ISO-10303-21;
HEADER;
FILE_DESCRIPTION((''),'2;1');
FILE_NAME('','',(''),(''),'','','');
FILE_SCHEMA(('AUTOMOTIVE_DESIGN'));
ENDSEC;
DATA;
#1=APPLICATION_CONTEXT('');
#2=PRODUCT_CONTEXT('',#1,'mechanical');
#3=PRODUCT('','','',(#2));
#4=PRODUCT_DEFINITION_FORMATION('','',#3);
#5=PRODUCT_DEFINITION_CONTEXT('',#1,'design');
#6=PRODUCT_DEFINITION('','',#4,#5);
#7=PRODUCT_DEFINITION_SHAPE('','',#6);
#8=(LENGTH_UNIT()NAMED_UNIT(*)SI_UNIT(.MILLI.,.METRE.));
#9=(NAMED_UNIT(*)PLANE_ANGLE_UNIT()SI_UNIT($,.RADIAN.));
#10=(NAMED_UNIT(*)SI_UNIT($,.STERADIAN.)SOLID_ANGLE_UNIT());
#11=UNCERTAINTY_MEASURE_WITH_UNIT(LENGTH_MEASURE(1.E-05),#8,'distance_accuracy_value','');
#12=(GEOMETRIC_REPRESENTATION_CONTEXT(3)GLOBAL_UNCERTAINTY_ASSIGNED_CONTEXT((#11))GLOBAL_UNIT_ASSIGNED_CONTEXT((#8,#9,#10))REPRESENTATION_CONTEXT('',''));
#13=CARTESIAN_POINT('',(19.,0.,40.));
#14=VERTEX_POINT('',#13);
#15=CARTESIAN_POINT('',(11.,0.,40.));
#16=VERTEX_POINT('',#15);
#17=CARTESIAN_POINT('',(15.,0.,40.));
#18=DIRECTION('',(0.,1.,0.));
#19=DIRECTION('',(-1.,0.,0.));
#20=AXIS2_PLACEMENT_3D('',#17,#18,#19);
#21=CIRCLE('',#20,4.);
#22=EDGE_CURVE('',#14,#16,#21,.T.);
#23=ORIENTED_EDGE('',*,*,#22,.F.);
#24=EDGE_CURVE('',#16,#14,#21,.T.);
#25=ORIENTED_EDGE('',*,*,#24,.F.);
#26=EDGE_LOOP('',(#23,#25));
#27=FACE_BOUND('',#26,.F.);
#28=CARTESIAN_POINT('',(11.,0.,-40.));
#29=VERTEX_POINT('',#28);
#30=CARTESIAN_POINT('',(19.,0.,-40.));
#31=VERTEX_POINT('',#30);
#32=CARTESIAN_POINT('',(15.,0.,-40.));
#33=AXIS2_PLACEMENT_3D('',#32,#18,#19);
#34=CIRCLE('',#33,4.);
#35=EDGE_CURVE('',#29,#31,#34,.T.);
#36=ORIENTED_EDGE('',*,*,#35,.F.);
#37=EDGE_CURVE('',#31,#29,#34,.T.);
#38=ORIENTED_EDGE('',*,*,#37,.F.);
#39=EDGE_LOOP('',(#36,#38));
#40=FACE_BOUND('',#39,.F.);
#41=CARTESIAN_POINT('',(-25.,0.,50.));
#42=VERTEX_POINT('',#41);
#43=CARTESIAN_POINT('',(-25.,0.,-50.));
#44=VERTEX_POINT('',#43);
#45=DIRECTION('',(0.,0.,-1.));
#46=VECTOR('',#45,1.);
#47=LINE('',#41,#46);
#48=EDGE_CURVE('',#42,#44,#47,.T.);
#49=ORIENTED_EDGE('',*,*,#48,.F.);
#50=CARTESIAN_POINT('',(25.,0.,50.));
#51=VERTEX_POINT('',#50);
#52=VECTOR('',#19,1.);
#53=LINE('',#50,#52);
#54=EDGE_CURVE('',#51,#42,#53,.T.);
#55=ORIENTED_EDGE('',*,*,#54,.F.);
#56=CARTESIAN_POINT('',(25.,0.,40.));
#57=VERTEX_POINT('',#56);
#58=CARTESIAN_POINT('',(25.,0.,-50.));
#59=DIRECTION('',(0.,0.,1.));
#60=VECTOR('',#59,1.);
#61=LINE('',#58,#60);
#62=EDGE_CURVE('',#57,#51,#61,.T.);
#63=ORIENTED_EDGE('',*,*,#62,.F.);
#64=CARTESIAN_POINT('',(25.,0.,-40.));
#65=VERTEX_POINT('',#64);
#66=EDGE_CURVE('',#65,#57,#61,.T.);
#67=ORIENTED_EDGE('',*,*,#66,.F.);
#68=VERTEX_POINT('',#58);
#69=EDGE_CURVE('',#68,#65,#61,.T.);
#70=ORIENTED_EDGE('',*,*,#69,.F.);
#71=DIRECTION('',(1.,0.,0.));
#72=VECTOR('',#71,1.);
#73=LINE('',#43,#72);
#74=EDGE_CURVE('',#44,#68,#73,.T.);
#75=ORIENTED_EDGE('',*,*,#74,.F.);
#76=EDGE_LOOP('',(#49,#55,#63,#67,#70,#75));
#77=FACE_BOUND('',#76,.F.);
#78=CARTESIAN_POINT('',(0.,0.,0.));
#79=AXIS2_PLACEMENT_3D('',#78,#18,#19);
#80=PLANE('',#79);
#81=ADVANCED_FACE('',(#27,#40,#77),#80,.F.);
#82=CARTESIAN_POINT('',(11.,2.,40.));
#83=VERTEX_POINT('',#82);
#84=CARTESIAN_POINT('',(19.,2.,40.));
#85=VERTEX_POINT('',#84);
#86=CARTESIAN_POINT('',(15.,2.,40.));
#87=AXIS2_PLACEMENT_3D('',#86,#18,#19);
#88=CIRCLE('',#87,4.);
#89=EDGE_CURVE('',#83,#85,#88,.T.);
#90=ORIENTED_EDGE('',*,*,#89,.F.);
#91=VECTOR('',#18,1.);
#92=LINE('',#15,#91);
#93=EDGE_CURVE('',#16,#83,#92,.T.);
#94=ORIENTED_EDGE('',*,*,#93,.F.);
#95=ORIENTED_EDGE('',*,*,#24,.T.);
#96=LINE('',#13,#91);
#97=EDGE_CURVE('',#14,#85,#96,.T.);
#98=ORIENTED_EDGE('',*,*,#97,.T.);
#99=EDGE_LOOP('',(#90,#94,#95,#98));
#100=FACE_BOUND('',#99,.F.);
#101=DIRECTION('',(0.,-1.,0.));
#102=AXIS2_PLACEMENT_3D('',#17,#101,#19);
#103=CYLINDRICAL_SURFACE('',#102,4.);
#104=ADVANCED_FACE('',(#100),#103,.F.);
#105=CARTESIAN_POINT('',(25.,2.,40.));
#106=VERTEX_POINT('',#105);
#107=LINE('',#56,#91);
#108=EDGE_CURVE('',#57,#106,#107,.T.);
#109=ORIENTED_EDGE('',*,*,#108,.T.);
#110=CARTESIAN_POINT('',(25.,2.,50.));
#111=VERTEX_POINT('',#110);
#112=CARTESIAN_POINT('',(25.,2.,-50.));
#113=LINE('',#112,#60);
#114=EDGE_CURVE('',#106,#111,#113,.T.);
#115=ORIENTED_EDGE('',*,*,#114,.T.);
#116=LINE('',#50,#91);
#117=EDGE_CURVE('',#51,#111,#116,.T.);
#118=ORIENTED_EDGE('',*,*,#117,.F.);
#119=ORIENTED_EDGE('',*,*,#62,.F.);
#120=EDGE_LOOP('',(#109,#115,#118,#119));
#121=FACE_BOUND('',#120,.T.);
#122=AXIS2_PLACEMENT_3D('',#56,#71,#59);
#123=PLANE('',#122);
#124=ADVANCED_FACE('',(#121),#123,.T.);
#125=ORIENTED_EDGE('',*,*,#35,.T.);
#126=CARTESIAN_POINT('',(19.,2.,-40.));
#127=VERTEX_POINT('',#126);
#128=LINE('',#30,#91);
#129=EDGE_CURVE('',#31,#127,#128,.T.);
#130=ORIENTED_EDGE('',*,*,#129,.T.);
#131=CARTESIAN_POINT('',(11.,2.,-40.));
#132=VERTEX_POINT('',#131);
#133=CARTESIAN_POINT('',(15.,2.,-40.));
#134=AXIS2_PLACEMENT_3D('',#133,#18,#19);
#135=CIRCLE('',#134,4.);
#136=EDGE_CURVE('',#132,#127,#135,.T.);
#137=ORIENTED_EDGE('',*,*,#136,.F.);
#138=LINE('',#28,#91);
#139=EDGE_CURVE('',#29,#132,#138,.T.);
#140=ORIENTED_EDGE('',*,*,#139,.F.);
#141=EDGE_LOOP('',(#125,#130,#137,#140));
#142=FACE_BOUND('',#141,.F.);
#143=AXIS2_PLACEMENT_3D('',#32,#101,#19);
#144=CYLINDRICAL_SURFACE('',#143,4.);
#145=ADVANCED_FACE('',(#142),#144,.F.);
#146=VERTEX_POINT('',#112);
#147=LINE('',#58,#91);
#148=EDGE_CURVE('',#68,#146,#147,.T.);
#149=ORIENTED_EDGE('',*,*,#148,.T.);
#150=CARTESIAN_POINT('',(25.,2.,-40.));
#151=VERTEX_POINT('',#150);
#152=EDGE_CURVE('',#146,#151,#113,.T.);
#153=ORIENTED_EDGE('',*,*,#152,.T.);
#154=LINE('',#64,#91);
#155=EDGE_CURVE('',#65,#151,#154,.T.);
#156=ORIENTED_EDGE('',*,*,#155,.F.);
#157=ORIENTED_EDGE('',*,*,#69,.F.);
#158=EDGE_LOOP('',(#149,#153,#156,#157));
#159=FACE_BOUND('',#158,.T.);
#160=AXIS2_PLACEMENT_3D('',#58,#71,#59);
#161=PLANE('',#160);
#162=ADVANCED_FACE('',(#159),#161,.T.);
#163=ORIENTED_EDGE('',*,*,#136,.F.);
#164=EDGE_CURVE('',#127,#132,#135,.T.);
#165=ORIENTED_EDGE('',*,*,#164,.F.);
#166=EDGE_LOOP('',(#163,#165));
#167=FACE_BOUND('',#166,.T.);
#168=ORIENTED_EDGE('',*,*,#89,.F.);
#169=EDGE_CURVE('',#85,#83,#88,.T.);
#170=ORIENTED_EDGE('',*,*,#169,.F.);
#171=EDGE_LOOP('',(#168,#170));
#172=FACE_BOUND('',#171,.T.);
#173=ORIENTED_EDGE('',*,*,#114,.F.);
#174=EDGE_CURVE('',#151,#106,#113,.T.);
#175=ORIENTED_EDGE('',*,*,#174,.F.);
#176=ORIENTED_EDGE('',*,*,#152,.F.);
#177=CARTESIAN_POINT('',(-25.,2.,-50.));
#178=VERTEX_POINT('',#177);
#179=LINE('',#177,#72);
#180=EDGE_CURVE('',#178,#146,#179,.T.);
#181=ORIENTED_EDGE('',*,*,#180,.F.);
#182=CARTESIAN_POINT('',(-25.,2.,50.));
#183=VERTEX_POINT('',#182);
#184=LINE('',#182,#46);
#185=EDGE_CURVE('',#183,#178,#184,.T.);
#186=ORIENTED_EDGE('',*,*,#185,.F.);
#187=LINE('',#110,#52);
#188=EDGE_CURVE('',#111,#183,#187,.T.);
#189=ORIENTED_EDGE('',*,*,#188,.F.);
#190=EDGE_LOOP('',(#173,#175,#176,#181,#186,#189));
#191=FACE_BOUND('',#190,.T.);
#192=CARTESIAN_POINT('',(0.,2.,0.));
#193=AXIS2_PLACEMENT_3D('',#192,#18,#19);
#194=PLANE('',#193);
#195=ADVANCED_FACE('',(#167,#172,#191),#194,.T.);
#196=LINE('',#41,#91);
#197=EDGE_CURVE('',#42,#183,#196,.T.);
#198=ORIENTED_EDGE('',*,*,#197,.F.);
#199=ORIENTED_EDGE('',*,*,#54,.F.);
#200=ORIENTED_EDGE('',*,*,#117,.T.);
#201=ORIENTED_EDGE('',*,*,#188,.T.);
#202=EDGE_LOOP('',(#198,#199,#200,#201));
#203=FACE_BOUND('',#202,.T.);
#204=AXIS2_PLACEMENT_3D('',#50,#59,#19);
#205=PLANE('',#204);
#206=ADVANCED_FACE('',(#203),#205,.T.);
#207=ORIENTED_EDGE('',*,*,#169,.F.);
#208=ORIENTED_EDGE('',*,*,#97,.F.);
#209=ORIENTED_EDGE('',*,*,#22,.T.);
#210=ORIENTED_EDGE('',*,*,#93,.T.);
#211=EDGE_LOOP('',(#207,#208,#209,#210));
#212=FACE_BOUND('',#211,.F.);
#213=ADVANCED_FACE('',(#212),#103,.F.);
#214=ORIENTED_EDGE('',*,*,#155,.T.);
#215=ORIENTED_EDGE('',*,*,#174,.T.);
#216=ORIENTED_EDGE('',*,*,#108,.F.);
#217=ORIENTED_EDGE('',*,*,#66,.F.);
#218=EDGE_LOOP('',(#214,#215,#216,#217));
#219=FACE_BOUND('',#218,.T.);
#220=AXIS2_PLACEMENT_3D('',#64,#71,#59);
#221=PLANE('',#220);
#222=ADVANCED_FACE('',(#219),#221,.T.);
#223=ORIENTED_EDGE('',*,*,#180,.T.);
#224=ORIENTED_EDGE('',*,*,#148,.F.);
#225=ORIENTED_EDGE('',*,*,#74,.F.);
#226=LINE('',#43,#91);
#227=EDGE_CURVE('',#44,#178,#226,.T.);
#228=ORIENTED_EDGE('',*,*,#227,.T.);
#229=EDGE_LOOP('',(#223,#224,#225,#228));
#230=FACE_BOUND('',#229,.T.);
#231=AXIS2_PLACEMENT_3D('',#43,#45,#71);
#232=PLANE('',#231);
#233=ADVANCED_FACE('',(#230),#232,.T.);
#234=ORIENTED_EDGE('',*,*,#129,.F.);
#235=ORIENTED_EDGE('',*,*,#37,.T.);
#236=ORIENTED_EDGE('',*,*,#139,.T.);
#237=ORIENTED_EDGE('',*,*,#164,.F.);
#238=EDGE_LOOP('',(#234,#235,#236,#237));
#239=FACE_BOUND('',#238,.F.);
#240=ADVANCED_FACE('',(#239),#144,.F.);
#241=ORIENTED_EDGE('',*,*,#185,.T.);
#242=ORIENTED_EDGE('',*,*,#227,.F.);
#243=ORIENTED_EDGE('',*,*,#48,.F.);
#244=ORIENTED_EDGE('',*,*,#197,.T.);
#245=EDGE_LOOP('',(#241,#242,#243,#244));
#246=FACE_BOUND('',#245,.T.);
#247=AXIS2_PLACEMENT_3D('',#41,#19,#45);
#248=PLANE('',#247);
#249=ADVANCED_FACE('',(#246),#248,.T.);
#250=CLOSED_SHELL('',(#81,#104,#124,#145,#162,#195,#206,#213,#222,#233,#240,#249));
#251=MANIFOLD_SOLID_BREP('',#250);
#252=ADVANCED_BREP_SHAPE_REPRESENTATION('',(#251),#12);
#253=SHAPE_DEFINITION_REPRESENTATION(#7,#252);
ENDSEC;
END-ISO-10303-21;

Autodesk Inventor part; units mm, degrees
ref_plane "YZ Plane" through (0, 0, 0) normal (1, 0, 0) x (0, 1, 0)
ref_plane "XZ Plane" through (0, 0, 0) normal (0, 1, 0) x (-1, 0, 0)
ref_plane "XY Plane" through (0, 0, 0) normal (0, 0, 1) x (1, 0, 0)
sketch "Sketch1" plane through (0, 0, 0) normal (0, 1, 0) x (-1, 0, 0)
  line L0 (-25, 50) -> (25, 50)
  line L1 (25, 50) -> (25, -50)
  line L2 (25, -50) -> (-25, -50)
  line L3 (-25, -50) -> (-25, 50)
  line L4 (-25, 50) -> (25, -50) construction
  line L5 (25, 50) -> (-25, -50) construction
  line L6 (-25, 50) -> (-25, 40)
  line L7 (-25, 40) -> (-15, 40)
  circle A0 centre (-15, 40) radius 4
  line L8 (-25, -50) -> (-25, -40)
  line L9 (-25, -40) -> (-15, -40)
  circle A1 centre (-15, -40) radius 4
  point P0 (0, 0)
  dimension "d0" = 50
  dimension "d1" = 100
  dimension "d8" = 10
  dimension "d9" = 10
  dimension "d10" = 8
  dimension "d11" = 10
  dimension "d12" = 10
  dimension "d13" = 8
extrude "Extrusion2" add sketch "Sketch1" along normal blind 2
properties part number "H"
